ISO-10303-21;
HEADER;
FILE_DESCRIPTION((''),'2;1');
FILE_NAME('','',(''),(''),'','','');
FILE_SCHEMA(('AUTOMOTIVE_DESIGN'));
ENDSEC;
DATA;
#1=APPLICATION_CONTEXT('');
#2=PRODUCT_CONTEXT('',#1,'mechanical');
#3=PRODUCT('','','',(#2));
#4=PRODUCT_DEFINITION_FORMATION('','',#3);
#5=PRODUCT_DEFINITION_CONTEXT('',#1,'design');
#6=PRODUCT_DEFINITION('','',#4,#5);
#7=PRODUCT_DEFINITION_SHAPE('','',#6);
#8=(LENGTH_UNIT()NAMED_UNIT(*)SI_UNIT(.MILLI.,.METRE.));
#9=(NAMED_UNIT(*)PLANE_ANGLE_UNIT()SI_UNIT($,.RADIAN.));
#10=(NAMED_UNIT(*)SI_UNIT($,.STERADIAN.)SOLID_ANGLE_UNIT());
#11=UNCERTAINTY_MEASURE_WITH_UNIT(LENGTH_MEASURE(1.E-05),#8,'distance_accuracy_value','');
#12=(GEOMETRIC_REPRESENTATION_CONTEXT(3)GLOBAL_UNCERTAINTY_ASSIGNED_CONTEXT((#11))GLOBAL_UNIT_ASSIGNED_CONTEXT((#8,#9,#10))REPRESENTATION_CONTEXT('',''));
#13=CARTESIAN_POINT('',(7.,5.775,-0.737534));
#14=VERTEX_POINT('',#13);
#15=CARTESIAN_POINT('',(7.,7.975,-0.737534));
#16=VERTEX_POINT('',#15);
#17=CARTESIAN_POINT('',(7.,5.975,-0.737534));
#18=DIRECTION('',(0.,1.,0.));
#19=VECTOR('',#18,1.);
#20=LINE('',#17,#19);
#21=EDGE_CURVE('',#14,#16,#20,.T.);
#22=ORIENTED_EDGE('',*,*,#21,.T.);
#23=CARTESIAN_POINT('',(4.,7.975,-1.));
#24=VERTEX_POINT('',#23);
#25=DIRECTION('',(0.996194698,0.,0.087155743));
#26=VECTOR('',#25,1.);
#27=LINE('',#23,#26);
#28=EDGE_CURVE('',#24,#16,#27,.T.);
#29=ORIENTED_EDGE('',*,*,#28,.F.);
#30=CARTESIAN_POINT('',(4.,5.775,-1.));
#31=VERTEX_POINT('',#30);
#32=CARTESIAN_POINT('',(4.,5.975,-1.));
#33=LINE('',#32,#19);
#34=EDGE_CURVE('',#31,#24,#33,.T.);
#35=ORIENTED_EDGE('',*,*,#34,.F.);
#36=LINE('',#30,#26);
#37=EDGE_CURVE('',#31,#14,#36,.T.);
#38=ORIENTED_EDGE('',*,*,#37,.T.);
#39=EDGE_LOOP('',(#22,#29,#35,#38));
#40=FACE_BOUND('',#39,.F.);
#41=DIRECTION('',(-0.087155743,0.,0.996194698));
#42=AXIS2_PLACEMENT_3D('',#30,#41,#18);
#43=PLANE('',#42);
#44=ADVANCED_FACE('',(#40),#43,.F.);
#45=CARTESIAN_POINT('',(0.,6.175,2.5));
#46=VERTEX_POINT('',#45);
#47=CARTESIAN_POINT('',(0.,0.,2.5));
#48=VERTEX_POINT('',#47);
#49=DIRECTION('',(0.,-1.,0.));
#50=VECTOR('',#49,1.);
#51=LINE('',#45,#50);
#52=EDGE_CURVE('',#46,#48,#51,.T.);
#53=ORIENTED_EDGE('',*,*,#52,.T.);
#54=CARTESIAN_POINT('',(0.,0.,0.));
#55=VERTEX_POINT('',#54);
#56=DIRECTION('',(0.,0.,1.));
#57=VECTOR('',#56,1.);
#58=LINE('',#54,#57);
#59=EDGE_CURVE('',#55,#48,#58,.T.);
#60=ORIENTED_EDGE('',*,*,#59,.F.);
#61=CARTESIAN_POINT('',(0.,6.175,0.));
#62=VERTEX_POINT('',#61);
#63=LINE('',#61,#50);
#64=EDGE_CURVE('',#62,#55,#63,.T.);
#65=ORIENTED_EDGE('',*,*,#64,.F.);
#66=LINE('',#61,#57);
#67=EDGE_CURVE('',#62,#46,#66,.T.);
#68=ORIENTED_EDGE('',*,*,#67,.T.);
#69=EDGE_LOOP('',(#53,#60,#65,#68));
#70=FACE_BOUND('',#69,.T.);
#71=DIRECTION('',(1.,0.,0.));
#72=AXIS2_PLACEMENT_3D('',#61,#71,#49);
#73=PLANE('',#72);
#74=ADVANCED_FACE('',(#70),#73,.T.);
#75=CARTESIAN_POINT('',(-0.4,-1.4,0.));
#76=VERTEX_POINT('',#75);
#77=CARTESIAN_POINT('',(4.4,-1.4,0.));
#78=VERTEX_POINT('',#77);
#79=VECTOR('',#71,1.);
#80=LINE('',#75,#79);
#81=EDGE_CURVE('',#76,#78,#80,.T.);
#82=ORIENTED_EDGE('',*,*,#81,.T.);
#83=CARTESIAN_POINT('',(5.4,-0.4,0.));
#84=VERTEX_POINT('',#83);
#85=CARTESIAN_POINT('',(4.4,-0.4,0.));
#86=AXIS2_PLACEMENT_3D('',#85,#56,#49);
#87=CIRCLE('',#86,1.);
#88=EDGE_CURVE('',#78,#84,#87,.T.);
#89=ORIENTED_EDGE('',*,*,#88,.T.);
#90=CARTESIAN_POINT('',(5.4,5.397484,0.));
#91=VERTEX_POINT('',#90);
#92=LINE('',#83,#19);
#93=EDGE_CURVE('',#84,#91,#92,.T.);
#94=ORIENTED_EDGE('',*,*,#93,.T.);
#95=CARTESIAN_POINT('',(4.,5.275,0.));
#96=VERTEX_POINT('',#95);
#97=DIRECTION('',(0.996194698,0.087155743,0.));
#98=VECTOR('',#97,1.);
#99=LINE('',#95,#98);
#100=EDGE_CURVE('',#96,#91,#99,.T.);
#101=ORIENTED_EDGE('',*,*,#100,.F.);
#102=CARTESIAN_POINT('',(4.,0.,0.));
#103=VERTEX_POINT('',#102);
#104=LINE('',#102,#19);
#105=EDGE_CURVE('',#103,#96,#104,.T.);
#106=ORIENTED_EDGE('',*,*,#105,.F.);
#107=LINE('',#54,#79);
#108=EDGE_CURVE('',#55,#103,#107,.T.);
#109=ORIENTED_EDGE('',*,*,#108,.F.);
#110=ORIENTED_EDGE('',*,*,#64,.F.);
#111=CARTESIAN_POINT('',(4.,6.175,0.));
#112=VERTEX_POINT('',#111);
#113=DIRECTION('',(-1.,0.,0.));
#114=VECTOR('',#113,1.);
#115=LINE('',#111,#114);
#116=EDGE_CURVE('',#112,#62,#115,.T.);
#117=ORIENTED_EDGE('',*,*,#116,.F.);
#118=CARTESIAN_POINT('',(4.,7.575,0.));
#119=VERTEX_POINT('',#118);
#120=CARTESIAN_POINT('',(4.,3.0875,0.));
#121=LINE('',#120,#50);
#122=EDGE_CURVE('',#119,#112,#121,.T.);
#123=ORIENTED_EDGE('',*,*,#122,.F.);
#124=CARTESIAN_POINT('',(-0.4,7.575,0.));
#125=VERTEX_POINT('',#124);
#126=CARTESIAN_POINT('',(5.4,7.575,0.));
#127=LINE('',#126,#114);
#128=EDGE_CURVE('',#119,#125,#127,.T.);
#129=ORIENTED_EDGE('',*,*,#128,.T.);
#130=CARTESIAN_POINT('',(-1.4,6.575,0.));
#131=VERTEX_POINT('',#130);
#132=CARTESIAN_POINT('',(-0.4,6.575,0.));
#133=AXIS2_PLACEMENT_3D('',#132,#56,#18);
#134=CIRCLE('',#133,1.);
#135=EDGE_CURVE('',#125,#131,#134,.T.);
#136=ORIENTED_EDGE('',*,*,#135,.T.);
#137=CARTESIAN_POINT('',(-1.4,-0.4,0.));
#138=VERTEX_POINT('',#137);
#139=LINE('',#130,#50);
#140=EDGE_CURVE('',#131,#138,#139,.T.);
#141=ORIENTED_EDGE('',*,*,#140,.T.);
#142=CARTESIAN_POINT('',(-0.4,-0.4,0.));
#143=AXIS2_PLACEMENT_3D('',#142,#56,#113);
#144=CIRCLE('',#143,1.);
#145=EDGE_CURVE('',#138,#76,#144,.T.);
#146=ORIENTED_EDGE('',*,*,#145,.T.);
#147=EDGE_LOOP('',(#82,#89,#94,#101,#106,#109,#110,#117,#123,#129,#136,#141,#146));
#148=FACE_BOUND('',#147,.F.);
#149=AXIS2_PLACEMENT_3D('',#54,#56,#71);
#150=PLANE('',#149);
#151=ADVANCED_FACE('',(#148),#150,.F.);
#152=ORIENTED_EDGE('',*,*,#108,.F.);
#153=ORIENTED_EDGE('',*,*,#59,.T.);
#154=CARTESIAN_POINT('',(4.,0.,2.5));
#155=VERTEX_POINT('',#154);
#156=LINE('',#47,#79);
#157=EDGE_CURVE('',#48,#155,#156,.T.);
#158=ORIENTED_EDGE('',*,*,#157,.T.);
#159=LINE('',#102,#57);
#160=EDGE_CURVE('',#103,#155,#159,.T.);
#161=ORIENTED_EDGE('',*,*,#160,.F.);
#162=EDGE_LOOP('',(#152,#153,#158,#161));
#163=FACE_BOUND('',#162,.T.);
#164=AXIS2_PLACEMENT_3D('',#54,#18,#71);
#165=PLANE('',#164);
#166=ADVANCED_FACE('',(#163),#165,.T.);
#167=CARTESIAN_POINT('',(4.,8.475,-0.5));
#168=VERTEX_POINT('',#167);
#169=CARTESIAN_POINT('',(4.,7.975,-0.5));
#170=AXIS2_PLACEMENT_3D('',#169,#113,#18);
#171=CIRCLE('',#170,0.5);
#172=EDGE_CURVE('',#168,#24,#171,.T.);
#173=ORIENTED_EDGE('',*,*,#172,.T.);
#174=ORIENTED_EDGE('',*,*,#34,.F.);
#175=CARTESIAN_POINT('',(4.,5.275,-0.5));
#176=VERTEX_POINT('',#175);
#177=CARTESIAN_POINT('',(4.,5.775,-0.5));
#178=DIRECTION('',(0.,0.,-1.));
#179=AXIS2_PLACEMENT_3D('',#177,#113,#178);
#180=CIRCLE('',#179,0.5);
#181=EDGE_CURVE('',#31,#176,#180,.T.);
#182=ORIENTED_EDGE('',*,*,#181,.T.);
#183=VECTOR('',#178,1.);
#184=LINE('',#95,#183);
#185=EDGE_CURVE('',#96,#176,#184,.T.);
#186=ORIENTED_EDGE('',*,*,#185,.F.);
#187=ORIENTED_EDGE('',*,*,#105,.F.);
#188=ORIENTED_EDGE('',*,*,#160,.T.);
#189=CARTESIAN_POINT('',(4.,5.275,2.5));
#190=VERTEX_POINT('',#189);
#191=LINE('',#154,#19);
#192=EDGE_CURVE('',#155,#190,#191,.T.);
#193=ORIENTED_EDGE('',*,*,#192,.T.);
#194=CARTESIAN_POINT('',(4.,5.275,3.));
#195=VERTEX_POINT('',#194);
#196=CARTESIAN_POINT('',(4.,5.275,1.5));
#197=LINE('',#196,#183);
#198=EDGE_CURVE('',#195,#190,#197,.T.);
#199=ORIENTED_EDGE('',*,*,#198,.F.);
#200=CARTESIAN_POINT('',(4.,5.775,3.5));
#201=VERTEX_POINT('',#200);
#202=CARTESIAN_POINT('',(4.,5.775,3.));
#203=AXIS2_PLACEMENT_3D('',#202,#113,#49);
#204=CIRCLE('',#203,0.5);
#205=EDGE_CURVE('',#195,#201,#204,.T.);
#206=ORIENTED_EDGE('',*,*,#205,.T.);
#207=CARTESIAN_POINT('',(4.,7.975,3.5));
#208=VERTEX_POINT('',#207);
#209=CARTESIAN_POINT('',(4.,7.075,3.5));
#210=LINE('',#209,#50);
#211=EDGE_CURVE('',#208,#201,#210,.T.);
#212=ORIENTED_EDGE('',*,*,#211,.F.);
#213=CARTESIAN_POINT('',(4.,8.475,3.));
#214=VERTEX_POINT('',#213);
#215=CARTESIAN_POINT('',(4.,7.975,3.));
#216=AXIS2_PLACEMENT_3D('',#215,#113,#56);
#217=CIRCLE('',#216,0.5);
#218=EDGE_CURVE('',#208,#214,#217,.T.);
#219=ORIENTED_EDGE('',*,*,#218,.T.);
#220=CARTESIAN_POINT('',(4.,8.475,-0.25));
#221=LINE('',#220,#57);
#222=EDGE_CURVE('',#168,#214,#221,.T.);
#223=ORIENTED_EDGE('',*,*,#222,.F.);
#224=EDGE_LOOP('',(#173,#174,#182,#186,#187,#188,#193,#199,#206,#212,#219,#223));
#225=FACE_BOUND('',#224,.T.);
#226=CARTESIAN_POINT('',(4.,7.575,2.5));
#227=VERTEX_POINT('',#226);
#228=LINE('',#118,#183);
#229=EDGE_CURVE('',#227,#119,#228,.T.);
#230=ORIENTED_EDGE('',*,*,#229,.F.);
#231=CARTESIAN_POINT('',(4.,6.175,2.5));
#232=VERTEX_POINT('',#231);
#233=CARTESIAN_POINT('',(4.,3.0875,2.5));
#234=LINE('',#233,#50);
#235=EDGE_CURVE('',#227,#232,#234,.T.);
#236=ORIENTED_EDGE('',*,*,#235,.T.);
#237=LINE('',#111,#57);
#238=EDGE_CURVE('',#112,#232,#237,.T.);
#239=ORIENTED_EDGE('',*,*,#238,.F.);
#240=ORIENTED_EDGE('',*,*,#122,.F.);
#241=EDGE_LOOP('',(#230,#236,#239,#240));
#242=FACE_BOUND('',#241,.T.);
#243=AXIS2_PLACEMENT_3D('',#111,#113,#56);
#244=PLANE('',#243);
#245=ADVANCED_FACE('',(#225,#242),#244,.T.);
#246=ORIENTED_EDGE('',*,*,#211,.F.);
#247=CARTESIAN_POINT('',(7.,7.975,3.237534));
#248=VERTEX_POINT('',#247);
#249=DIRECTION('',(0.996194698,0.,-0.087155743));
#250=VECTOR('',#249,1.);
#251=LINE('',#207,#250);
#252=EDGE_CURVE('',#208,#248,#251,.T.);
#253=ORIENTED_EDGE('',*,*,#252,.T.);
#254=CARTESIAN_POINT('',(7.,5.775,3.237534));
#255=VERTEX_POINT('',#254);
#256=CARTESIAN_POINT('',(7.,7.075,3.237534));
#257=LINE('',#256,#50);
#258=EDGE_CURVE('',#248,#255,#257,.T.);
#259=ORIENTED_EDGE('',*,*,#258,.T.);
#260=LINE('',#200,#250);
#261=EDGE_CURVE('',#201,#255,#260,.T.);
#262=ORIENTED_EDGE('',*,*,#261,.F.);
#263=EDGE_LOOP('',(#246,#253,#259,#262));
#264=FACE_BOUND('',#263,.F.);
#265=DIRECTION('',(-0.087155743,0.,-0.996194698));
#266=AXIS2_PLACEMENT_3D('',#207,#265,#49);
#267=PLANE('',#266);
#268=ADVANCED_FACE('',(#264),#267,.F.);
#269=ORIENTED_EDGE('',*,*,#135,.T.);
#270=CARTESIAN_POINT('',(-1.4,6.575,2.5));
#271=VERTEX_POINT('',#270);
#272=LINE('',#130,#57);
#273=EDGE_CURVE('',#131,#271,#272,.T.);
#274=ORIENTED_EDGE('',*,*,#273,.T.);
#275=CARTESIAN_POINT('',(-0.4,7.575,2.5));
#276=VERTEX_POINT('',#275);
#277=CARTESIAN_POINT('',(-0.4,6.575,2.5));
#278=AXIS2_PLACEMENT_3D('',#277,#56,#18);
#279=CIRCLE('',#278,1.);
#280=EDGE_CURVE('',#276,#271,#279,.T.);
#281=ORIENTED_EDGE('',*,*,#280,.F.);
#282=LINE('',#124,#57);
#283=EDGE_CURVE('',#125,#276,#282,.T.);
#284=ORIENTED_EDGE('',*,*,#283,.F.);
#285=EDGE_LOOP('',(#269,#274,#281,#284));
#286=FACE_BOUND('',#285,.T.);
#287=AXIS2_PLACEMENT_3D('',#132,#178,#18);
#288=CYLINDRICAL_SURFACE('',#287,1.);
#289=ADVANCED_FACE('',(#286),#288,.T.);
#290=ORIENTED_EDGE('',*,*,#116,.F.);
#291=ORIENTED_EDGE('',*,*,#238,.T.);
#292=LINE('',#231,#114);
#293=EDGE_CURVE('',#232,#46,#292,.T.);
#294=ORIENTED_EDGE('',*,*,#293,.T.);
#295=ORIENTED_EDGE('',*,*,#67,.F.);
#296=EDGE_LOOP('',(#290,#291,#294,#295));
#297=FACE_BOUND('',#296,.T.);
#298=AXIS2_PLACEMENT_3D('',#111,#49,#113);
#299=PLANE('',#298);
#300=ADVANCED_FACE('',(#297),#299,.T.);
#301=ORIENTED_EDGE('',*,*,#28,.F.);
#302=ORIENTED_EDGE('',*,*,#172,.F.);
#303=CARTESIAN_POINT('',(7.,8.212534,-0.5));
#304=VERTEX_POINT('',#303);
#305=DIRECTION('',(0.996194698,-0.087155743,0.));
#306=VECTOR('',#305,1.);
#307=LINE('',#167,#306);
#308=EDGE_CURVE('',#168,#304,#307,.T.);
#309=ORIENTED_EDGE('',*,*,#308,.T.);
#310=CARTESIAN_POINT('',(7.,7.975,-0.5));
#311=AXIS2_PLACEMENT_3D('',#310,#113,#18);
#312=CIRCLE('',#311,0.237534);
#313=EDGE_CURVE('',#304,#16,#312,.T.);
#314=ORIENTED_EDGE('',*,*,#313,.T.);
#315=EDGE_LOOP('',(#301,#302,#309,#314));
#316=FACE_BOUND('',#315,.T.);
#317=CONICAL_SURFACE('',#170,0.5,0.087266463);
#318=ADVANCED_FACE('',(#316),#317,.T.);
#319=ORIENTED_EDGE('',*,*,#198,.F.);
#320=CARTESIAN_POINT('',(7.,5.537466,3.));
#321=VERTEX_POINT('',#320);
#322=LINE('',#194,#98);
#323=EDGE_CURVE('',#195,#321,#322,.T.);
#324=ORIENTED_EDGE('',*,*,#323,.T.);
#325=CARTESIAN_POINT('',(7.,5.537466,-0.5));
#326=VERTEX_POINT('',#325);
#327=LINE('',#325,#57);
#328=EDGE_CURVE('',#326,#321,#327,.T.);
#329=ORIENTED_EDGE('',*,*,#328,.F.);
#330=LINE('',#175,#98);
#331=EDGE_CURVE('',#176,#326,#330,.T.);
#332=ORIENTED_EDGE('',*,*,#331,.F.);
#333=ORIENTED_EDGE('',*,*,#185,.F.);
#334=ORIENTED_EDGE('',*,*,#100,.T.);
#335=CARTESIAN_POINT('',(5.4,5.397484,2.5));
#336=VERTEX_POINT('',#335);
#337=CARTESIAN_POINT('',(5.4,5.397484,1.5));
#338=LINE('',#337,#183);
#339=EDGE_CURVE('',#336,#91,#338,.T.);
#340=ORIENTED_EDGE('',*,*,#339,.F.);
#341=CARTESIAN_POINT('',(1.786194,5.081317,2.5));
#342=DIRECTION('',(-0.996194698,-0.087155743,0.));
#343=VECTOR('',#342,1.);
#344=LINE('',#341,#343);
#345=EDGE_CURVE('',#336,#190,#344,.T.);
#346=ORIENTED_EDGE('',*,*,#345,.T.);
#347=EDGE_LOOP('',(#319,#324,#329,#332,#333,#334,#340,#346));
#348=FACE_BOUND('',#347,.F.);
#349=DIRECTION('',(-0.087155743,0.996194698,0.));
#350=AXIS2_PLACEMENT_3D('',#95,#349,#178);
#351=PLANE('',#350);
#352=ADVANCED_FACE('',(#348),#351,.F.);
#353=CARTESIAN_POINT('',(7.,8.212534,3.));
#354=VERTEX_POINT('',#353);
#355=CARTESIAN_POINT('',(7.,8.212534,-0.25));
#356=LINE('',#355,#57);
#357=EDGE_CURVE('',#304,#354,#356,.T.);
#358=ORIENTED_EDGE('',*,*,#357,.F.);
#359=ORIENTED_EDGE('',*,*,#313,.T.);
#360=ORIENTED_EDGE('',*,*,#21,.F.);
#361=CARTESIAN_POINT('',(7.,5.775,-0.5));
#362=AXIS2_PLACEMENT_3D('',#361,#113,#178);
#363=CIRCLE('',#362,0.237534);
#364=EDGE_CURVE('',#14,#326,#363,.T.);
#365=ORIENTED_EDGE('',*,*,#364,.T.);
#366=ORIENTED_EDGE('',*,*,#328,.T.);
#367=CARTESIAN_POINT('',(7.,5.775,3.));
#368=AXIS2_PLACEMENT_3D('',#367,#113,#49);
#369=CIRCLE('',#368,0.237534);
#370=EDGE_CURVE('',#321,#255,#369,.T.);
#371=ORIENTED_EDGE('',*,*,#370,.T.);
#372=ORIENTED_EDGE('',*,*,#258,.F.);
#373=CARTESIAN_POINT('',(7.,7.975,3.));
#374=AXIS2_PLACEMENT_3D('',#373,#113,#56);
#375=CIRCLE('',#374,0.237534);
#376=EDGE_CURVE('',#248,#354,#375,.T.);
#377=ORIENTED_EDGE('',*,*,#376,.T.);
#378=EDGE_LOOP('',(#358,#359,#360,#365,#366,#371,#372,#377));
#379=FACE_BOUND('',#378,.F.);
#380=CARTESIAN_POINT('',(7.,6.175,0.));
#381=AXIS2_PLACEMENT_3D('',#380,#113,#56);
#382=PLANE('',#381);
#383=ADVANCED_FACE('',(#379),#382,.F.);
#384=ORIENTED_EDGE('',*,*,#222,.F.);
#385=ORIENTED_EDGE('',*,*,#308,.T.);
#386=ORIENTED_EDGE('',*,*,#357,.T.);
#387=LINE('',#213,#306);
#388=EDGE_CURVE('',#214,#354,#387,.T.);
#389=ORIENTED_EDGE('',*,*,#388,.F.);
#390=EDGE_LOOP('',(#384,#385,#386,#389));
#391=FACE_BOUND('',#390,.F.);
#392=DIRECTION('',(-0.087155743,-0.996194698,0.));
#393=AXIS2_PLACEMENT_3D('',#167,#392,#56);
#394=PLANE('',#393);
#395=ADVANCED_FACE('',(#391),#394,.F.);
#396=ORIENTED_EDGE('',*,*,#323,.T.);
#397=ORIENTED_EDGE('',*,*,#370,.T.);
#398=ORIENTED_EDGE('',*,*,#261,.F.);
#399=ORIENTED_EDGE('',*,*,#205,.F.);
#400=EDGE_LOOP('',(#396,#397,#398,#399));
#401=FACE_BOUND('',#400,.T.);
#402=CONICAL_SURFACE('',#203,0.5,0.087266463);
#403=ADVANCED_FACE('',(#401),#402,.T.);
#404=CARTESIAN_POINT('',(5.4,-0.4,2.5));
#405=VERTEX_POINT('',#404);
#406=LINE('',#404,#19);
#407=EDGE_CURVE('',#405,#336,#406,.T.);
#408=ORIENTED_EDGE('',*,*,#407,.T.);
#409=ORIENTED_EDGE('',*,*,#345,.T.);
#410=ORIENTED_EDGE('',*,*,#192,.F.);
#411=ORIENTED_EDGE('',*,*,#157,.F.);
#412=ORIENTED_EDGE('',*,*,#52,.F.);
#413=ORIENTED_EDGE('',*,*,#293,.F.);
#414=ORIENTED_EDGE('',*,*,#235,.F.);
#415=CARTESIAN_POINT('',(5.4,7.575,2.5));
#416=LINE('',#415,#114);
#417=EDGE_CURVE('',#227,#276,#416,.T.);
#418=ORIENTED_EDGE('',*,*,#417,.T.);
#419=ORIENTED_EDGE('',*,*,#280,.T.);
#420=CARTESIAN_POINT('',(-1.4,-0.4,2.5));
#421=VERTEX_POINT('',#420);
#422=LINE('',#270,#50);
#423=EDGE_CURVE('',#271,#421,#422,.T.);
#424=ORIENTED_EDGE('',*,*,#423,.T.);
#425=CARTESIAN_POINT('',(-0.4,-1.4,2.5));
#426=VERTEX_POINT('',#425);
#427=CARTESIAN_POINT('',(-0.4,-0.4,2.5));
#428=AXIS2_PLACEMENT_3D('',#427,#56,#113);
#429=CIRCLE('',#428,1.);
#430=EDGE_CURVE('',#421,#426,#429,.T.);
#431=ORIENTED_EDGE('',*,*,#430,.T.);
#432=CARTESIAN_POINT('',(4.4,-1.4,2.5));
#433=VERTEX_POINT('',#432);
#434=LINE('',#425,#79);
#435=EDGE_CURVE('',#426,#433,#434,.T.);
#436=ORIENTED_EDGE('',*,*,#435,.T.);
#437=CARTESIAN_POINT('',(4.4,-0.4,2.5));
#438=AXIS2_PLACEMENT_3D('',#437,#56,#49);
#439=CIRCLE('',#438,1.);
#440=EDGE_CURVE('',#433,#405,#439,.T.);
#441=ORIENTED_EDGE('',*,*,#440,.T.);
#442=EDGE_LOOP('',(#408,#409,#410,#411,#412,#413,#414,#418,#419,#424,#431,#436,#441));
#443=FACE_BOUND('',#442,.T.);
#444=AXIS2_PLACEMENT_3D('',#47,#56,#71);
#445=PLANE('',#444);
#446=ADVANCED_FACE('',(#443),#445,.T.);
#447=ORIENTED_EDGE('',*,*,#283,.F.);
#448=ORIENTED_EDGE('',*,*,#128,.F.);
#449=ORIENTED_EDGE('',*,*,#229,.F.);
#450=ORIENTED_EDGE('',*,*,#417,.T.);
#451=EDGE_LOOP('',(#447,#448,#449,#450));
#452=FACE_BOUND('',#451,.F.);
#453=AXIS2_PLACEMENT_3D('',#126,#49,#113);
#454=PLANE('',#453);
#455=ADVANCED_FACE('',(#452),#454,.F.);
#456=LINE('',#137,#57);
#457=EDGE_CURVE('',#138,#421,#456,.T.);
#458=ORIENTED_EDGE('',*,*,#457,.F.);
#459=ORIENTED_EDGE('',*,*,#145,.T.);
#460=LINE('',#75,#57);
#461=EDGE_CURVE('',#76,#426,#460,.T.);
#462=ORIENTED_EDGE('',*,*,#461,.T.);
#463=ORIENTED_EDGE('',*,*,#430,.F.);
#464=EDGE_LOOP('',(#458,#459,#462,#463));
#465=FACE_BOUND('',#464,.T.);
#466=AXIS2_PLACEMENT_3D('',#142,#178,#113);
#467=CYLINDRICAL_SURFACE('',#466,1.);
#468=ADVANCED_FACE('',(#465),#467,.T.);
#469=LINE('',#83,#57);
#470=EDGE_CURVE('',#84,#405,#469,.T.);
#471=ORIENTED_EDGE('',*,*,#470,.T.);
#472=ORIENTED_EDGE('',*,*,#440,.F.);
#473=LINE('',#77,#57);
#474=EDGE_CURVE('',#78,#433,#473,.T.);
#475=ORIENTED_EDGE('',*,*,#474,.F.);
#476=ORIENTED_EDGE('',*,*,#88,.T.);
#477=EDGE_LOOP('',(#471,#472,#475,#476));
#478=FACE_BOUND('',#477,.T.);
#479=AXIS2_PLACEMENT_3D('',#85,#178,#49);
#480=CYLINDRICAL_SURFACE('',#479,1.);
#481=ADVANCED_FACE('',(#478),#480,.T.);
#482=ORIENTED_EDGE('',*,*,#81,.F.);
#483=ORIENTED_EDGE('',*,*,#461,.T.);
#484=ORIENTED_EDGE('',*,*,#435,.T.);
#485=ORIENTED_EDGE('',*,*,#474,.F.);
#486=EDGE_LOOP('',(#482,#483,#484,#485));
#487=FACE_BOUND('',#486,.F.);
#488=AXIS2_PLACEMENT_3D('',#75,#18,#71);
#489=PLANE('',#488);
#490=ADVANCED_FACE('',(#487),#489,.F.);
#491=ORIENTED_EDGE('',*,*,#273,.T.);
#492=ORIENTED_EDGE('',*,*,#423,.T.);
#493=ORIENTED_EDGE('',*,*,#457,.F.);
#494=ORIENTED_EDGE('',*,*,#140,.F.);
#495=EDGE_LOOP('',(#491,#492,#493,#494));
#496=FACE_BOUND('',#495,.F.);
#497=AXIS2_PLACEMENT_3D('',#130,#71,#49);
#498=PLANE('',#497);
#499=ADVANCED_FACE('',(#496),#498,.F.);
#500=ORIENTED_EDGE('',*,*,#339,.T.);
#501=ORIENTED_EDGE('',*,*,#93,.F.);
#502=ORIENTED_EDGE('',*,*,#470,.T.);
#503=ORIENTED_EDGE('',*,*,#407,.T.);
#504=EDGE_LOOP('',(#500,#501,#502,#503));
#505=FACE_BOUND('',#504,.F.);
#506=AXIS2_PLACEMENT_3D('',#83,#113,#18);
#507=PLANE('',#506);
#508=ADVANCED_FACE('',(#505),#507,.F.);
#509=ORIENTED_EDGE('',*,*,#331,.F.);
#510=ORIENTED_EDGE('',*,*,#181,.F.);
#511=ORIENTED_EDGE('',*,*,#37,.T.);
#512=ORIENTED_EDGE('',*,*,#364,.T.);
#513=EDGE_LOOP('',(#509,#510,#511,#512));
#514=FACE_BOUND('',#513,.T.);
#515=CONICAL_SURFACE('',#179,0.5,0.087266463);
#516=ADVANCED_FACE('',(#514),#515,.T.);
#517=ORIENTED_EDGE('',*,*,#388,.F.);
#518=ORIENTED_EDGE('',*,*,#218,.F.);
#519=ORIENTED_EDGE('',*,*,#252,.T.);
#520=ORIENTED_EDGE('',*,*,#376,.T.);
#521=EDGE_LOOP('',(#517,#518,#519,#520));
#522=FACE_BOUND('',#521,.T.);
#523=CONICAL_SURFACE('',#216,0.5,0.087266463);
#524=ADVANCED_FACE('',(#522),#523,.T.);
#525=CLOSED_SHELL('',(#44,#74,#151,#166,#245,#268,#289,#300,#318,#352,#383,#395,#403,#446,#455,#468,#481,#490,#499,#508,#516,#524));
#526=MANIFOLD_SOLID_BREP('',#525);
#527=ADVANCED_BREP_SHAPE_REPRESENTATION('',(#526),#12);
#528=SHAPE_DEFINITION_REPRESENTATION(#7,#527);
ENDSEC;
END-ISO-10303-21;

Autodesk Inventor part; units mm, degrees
ref_plane "YZ Plane" through (0, 0, 0) normal (1, 0, 0) x (0, 1, 0)
ref_plane "XZ Plane" through (0, 0, 0) normal (0, 1, 0) x (-1, 0, 0)
ref_plane "XY Plane" through (0, 0, 0) normal (0, 0, 1) x (1, 0, 0)
sketch "Sketch1" plane through (0, 0, 0) normal (0, 0, 1) x (1, 0, 0)
  line L0 (0, 0) -> (4, 0)
  line L1 (4, 0) -> (4, 6.175)
  line L2 (4, 6.175) -> (0, 6.175)
  line L3 (0, 6.175) -> (0, 0)
  line L4 (-0.4, -1.4) -> (4.4, -1.4)
  line L5 (5.4, -0.4) -> (5.4, 7.575)
  line L6 (5.4, 7.575) -> (-0.4, 7.575)
  line L7 (-1.4, 6.575) -> (-1.4, -0.4)
  arc A0 (-0.4, 7.575) -> (-1.4, 6.575) centre (-0.4, 6.575) ccw
  arc A1 (-1.4, -0.4) -> (-0.4, -1.4) centre (-0.4, -0.4) ccw
  arc A2 (4.4, -1.4) -> (5.4, -0.4) centre (4.4, -0.4) ccw
  point P0 (-1.4, -1.4)
  point P1 (5.4, -1.4)
  point P2 (-1.4, 7.575)
  dimension "d0" = 4
  dimension "d1" = 6.175
  dimension "d2" = 1.4
  dimension "d5" = 1
extrude "Extrusion1" add sketch "Sketch1" along normal blind 2.5
sketch "草圖3" plane through (4, 6.175, 0) normal (-1, 0, 0) x (0, 0, 1)
  line L0 (0, -6.175) -> (0, 0) projected
  line L1 (-0.5, 2.3) -> (3, 2.3)
  line L2 (3.5, 1.8) -> (3.5, -0.4)
  line L3 (3, -0.9) -> (-0.5, -0.9)
  line L4 (-1, -0.4) -> (-1, 1.8)
  line L5 (0, -7.575) -> (2.5, -7.575) projected
  arc A0 (-0.5, 2.3) -> (-1, 1.8) centre (-0.5, 1.8) ccw
  arc A1 (-1, -0.4) -> (-0.5, -0.9) centre (-0.5, -0.4) ccw
  arc A2 (3, -0.9) -> (3.5, -0.4) centre (3, -0.4) ccw
  arc A3 (3.5, 1.8) -> (3, 2.3) centre (3, 1.8) ccw
  point P0 (-1, 2.3)
  point P1 (3.5, -0.9)
  point P2 (3.5, 2.3)
  dimension "d13" = 4.5
  dimension "d15" = 3.2
  dimension "d16" = 1
  dimension "d17" = 6.675
  dimension "d18" = 0.5
extrude "擠出3" add sketch "草圖3" against normal blind 3 draft -5
properties part number "fastener_04"
